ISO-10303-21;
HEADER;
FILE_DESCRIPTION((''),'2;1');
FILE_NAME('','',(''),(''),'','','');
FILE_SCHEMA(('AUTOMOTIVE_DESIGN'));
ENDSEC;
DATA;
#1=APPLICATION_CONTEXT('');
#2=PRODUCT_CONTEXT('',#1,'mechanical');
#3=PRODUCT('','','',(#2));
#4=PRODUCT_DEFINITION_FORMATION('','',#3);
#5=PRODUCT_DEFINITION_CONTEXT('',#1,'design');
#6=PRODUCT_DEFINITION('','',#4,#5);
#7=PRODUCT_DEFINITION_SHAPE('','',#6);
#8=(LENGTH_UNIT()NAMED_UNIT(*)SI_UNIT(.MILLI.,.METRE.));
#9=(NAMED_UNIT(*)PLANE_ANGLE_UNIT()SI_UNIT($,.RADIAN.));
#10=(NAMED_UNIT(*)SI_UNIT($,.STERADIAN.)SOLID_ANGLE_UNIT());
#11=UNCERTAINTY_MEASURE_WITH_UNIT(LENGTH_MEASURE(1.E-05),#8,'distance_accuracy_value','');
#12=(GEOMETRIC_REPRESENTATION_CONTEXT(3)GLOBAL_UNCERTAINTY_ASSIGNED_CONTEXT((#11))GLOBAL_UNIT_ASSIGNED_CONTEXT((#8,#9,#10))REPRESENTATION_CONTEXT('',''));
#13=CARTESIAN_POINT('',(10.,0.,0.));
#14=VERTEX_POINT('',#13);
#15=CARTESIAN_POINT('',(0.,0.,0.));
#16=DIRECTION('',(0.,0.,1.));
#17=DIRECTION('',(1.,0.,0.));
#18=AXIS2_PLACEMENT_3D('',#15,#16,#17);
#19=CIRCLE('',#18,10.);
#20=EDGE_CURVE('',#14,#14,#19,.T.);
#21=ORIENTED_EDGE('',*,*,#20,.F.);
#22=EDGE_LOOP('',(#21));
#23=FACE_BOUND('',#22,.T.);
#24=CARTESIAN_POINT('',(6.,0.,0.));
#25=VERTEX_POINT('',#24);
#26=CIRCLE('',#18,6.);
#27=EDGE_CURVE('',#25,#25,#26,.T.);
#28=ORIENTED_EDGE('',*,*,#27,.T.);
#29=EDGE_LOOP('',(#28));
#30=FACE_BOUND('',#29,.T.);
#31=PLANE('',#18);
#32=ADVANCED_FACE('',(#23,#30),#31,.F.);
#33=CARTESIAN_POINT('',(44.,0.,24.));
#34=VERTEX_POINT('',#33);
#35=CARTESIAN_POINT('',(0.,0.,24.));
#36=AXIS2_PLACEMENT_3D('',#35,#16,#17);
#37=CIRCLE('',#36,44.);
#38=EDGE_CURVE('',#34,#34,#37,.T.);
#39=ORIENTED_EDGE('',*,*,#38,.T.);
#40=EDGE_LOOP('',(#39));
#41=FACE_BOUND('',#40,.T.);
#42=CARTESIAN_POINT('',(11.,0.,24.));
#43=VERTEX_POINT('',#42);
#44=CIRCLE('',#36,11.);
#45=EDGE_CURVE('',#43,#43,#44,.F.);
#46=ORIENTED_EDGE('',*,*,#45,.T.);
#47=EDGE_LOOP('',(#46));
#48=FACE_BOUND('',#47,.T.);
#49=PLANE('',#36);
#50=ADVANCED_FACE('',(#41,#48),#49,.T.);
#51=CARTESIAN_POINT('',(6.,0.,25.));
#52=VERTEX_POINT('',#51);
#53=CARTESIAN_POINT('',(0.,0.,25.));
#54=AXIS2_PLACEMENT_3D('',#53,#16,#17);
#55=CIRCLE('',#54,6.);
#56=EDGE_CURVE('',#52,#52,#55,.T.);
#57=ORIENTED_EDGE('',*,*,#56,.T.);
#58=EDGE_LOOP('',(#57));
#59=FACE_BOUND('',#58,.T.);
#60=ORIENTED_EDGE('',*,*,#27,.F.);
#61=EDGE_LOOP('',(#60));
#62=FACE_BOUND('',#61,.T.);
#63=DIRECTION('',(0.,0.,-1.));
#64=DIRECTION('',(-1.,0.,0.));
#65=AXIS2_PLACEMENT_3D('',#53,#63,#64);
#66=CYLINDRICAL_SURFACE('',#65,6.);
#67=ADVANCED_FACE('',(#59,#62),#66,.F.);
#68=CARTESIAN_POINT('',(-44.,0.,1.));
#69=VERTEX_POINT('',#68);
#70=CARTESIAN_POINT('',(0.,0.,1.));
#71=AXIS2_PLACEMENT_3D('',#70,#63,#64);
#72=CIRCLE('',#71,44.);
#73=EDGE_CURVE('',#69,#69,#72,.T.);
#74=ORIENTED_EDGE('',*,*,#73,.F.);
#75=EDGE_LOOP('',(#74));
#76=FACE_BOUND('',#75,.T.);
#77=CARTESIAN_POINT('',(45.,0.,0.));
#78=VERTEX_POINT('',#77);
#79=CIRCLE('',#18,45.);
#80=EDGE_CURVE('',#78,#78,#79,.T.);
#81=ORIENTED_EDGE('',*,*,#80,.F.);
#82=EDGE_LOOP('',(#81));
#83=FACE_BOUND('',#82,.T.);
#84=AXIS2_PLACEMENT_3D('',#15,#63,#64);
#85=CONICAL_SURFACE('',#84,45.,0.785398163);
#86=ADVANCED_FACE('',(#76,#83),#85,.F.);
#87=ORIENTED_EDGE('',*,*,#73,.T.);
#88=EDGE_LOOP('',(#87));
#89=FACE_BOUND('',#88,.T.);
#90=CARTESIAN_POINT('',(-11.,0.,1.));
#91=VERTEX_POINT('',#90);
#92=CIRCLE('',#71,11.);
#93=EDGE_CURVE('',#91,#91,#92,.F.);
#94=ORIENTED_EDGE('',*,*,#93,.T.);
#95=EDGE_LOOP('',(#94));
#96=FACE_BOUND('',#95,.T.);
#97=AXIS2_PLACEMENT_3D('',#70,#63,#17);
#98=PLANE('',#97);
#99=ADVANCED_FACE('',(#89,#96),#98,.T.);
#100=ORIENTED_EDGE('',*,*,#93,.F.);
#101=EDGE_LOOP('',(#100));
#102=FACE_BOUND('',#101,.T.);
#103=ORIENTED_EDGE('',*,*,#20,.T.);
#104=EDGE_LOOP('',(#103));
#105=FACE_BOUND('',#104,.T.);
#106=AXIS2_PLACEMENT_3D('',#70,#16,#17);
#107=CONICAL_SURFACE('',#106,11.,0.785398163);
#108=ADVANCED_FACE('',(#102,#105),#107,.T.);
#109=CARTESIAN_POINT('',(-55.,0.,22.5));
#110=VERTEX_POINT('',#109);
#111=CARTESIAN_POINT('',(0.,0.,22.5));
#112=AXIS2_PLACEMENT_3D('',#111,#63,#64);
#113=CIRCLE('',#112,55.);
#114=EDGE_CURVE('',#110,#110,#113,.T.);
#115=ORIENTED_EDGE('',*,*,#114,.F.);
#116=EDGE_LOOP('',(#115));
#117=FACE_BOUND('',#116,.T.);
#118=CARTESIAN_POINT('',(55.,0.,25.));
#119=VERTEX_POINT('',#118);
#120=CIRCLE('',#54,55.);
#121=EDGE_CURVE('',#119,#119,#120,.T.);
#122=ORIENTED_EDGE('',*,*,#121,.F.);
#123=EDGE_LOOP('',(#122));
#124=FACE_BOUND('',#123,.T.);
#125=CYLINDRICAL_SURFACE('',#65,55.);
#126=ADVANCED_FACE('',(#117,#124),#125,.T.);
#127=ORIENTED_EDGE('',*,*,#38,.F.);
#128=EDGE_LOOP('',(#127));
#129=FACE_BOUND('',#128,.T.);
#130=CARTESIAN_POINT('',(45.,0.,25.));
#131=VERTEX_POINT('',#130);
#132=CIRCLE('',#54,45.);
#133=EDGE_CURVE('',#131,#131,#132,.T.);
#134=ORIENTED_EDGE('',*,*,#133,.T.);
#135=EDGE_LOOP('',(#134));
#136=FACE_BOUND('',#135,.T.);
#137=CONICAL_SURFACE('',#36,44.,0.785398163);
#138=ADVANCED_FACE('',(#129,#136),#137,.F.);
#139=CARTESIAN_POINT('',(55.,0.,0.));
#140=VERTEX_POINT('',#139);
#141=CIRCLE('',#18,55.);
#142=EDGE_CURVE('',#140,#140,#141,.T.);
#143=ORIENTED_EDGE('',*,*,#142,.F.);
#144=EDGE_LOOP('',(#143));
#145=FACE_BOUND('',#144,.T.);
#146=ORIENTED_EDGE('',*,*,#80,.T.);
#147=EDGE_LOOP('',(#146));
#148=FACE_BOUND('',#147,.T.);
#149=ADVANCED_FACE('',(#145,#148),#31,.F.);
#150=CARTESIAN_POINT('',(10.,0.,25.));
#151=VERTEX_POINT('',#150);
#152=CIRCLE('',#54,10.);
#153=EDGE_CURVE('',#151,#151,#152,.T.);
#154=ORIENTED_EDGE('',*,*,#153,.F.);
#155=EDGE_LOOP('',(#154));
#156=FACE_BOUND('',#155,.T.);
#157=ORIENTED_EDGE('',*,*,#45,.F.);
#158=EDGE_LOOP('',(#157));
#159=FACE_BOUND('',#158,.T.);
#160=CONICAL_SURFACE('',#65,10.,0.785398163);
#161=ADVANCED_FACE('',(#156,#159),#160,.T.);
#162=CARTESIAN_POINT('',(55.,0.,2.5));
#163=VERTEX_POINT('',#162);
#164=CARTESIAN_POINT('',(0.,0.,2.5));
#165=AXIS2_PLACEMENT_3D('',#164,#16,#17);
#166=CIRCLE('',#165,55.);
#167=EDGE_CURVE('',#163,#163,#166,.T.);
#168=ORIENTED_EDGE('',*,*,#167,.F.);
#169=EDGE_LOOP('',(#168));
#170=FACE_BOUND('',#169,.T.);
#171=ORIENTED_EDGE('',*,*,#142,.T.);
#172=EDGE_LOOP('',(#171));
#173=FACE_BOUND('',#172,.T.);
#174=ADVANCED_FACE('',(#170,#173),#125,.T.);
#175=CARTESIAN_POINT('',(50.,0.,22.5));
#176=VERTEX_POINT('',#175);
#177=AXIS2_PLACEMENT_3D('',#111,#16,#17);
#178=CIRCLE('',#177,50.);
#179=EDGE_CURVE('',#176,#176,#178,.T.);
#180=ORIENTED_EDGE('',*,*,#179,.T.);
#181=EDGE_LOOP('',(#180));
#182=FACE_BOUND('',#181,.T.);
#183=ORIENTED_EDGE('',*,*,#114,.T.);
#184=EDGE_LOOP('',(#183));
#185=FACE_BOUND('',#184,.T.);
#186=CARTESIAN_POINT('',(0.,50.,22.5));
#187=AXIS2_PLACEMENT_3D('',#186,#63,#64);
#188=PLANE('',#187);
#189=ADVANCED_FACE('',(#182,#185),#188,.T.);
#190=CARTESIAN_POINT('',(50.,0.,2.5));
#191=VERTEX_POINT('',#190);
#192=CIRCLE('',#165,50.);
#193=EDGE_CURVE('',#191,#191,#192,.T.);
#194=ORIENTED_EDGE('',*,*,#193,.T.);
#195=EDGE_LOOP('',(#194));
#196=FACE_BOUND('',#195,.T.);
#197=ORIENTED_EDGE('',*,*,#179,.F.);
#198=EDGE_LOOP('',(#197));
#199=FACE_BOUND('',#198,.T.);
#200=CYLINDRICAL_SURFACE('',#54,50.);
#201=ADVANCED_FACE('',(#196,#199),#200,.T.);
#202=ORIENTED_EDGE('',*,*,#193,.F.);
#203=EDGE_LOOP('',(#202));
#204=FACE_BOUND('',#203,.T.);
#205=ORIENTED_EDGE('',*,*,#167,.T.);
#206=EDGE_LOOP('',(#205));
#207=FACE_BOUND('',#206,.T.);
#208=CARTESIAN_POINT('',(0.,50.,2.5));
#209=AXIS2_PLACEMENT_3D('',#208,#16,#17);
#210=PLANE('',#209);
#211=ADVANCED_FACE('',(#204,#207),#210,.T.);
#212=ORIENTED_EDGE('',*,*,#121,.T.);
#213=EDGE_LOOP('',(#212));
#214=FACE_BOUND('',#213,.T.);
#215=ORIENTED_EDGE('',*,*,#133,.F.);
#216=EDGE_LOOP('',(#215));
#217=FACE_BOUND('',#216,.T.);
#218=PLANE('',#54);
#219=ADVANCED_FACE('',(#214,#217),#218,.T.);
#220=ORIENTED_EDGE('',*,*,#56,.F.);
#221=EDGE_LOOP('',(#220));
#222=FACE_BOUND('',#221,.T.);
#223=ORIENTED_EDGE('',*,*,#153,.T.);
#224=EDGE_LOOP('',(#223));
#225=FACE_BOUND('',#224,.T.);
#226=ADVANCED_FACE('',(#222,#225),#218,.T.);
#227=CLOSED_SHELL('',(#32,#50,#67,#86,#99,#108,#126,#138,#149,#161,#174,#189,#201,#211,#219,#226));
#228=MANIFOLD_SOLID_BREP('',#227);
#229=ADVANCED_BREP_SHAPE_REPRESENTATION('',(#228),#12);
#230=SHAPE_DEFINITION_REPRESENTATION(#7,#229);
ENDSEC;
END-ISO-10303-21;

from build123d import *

# Parameters (mm, degrees)
CROQUIS1_R                 = 55
CROQUIS1_R_2               = 6
SALIENTE_EXTRUIR1_DEPTH    = 25
CROQUIS3_W                 = 20
CROQUIS3_H                 = 10
CROQUIS4_R                 = 45
CROQUIS4_R_2               = 10
CORTAR_EXTRUIR1_DEPTH      = 1
CHAFL_N1_SIZE              = 1
CHAFL_N1_OF_SIMETR_A2_SIZE = 1


with BuildPart() as part:
    # Croquis1 → Saliente-Extruir1 (new body)
    with BuildSketch(Plane.XY):
        Circle(CROQUIS1_R)
        Circle(CROQUIS1_R_2, mode=Mode.SUBTRACT)
    extrude(amount=SALIENTE_EXTRUIR1_DEPTH)

    # Croquis3 → Cortar-Revolución1 (revolve, cut)
    with BuildSketch(Plane(origin=(0, 0, 0), x_dir=(0, 0, -1), z_dir=(1, 0, 0)), mode=Mode.PRIVATE) as cortar_revoluci_n1_sk:
        with Locations((-12.5, 55)):
            Rectangle(CROQUIS3_W, CROQUIS3_H)
    revolve(cortar_revoluci_n1_sk.sketch.rotate(Axis((0, 0, 25), (0, 0, -1)), 90), axis=Axis((0, 0, 25), (0, 0, -1)), mode=Mode.SUBTRACT)

    # Croquis4 → Cortar-Extruir1 (cut)
    with BuildSketch(Plane.XY.offset(25)):
        Circle(CROQUIS4_R)
        Circle(CROQUIS4_R_2, mode=Mode.SUBTRACT)
    cortar_extruir1 = extrude(amount=-CORTAR_EXTRUIR1_DEPTH, mode=Mode.SUBTRACT)

    # Chaflán1
    chafl_n1_edges = [part.edges().sort_by_distance(p)[0] for p in [
        (-45, 0, 24),
        (-10, 0, 24),
    ]]
    chamfer(chafl_n1_edges, length=CHAFL_N1_SIZE - 0.0001)  # a hair under: the kernel refuses the full size

    # Simetría2: Cortar-Extruir1 across plane
    add(cortar_extruir1.mirror(Plane.XY.offset(12.5)), mode=Mode.SUBTRACT)

    # Chaflán1 of Simetría2
    chafl_n1_of_simetr_a2_edges = [part.edges().sort_by_distance(p)[0] for p in [
        (-45, 0, 1),
        (-10, 0, 1),
    ]]
    chamfer(chafl_n1_of_simetr_a2_edges, length=CHAFL_N1_OF_SIMETR_A2_SIZE - 0.0001)  # a hair under: the kernel refuses the full size


solid = part.part
